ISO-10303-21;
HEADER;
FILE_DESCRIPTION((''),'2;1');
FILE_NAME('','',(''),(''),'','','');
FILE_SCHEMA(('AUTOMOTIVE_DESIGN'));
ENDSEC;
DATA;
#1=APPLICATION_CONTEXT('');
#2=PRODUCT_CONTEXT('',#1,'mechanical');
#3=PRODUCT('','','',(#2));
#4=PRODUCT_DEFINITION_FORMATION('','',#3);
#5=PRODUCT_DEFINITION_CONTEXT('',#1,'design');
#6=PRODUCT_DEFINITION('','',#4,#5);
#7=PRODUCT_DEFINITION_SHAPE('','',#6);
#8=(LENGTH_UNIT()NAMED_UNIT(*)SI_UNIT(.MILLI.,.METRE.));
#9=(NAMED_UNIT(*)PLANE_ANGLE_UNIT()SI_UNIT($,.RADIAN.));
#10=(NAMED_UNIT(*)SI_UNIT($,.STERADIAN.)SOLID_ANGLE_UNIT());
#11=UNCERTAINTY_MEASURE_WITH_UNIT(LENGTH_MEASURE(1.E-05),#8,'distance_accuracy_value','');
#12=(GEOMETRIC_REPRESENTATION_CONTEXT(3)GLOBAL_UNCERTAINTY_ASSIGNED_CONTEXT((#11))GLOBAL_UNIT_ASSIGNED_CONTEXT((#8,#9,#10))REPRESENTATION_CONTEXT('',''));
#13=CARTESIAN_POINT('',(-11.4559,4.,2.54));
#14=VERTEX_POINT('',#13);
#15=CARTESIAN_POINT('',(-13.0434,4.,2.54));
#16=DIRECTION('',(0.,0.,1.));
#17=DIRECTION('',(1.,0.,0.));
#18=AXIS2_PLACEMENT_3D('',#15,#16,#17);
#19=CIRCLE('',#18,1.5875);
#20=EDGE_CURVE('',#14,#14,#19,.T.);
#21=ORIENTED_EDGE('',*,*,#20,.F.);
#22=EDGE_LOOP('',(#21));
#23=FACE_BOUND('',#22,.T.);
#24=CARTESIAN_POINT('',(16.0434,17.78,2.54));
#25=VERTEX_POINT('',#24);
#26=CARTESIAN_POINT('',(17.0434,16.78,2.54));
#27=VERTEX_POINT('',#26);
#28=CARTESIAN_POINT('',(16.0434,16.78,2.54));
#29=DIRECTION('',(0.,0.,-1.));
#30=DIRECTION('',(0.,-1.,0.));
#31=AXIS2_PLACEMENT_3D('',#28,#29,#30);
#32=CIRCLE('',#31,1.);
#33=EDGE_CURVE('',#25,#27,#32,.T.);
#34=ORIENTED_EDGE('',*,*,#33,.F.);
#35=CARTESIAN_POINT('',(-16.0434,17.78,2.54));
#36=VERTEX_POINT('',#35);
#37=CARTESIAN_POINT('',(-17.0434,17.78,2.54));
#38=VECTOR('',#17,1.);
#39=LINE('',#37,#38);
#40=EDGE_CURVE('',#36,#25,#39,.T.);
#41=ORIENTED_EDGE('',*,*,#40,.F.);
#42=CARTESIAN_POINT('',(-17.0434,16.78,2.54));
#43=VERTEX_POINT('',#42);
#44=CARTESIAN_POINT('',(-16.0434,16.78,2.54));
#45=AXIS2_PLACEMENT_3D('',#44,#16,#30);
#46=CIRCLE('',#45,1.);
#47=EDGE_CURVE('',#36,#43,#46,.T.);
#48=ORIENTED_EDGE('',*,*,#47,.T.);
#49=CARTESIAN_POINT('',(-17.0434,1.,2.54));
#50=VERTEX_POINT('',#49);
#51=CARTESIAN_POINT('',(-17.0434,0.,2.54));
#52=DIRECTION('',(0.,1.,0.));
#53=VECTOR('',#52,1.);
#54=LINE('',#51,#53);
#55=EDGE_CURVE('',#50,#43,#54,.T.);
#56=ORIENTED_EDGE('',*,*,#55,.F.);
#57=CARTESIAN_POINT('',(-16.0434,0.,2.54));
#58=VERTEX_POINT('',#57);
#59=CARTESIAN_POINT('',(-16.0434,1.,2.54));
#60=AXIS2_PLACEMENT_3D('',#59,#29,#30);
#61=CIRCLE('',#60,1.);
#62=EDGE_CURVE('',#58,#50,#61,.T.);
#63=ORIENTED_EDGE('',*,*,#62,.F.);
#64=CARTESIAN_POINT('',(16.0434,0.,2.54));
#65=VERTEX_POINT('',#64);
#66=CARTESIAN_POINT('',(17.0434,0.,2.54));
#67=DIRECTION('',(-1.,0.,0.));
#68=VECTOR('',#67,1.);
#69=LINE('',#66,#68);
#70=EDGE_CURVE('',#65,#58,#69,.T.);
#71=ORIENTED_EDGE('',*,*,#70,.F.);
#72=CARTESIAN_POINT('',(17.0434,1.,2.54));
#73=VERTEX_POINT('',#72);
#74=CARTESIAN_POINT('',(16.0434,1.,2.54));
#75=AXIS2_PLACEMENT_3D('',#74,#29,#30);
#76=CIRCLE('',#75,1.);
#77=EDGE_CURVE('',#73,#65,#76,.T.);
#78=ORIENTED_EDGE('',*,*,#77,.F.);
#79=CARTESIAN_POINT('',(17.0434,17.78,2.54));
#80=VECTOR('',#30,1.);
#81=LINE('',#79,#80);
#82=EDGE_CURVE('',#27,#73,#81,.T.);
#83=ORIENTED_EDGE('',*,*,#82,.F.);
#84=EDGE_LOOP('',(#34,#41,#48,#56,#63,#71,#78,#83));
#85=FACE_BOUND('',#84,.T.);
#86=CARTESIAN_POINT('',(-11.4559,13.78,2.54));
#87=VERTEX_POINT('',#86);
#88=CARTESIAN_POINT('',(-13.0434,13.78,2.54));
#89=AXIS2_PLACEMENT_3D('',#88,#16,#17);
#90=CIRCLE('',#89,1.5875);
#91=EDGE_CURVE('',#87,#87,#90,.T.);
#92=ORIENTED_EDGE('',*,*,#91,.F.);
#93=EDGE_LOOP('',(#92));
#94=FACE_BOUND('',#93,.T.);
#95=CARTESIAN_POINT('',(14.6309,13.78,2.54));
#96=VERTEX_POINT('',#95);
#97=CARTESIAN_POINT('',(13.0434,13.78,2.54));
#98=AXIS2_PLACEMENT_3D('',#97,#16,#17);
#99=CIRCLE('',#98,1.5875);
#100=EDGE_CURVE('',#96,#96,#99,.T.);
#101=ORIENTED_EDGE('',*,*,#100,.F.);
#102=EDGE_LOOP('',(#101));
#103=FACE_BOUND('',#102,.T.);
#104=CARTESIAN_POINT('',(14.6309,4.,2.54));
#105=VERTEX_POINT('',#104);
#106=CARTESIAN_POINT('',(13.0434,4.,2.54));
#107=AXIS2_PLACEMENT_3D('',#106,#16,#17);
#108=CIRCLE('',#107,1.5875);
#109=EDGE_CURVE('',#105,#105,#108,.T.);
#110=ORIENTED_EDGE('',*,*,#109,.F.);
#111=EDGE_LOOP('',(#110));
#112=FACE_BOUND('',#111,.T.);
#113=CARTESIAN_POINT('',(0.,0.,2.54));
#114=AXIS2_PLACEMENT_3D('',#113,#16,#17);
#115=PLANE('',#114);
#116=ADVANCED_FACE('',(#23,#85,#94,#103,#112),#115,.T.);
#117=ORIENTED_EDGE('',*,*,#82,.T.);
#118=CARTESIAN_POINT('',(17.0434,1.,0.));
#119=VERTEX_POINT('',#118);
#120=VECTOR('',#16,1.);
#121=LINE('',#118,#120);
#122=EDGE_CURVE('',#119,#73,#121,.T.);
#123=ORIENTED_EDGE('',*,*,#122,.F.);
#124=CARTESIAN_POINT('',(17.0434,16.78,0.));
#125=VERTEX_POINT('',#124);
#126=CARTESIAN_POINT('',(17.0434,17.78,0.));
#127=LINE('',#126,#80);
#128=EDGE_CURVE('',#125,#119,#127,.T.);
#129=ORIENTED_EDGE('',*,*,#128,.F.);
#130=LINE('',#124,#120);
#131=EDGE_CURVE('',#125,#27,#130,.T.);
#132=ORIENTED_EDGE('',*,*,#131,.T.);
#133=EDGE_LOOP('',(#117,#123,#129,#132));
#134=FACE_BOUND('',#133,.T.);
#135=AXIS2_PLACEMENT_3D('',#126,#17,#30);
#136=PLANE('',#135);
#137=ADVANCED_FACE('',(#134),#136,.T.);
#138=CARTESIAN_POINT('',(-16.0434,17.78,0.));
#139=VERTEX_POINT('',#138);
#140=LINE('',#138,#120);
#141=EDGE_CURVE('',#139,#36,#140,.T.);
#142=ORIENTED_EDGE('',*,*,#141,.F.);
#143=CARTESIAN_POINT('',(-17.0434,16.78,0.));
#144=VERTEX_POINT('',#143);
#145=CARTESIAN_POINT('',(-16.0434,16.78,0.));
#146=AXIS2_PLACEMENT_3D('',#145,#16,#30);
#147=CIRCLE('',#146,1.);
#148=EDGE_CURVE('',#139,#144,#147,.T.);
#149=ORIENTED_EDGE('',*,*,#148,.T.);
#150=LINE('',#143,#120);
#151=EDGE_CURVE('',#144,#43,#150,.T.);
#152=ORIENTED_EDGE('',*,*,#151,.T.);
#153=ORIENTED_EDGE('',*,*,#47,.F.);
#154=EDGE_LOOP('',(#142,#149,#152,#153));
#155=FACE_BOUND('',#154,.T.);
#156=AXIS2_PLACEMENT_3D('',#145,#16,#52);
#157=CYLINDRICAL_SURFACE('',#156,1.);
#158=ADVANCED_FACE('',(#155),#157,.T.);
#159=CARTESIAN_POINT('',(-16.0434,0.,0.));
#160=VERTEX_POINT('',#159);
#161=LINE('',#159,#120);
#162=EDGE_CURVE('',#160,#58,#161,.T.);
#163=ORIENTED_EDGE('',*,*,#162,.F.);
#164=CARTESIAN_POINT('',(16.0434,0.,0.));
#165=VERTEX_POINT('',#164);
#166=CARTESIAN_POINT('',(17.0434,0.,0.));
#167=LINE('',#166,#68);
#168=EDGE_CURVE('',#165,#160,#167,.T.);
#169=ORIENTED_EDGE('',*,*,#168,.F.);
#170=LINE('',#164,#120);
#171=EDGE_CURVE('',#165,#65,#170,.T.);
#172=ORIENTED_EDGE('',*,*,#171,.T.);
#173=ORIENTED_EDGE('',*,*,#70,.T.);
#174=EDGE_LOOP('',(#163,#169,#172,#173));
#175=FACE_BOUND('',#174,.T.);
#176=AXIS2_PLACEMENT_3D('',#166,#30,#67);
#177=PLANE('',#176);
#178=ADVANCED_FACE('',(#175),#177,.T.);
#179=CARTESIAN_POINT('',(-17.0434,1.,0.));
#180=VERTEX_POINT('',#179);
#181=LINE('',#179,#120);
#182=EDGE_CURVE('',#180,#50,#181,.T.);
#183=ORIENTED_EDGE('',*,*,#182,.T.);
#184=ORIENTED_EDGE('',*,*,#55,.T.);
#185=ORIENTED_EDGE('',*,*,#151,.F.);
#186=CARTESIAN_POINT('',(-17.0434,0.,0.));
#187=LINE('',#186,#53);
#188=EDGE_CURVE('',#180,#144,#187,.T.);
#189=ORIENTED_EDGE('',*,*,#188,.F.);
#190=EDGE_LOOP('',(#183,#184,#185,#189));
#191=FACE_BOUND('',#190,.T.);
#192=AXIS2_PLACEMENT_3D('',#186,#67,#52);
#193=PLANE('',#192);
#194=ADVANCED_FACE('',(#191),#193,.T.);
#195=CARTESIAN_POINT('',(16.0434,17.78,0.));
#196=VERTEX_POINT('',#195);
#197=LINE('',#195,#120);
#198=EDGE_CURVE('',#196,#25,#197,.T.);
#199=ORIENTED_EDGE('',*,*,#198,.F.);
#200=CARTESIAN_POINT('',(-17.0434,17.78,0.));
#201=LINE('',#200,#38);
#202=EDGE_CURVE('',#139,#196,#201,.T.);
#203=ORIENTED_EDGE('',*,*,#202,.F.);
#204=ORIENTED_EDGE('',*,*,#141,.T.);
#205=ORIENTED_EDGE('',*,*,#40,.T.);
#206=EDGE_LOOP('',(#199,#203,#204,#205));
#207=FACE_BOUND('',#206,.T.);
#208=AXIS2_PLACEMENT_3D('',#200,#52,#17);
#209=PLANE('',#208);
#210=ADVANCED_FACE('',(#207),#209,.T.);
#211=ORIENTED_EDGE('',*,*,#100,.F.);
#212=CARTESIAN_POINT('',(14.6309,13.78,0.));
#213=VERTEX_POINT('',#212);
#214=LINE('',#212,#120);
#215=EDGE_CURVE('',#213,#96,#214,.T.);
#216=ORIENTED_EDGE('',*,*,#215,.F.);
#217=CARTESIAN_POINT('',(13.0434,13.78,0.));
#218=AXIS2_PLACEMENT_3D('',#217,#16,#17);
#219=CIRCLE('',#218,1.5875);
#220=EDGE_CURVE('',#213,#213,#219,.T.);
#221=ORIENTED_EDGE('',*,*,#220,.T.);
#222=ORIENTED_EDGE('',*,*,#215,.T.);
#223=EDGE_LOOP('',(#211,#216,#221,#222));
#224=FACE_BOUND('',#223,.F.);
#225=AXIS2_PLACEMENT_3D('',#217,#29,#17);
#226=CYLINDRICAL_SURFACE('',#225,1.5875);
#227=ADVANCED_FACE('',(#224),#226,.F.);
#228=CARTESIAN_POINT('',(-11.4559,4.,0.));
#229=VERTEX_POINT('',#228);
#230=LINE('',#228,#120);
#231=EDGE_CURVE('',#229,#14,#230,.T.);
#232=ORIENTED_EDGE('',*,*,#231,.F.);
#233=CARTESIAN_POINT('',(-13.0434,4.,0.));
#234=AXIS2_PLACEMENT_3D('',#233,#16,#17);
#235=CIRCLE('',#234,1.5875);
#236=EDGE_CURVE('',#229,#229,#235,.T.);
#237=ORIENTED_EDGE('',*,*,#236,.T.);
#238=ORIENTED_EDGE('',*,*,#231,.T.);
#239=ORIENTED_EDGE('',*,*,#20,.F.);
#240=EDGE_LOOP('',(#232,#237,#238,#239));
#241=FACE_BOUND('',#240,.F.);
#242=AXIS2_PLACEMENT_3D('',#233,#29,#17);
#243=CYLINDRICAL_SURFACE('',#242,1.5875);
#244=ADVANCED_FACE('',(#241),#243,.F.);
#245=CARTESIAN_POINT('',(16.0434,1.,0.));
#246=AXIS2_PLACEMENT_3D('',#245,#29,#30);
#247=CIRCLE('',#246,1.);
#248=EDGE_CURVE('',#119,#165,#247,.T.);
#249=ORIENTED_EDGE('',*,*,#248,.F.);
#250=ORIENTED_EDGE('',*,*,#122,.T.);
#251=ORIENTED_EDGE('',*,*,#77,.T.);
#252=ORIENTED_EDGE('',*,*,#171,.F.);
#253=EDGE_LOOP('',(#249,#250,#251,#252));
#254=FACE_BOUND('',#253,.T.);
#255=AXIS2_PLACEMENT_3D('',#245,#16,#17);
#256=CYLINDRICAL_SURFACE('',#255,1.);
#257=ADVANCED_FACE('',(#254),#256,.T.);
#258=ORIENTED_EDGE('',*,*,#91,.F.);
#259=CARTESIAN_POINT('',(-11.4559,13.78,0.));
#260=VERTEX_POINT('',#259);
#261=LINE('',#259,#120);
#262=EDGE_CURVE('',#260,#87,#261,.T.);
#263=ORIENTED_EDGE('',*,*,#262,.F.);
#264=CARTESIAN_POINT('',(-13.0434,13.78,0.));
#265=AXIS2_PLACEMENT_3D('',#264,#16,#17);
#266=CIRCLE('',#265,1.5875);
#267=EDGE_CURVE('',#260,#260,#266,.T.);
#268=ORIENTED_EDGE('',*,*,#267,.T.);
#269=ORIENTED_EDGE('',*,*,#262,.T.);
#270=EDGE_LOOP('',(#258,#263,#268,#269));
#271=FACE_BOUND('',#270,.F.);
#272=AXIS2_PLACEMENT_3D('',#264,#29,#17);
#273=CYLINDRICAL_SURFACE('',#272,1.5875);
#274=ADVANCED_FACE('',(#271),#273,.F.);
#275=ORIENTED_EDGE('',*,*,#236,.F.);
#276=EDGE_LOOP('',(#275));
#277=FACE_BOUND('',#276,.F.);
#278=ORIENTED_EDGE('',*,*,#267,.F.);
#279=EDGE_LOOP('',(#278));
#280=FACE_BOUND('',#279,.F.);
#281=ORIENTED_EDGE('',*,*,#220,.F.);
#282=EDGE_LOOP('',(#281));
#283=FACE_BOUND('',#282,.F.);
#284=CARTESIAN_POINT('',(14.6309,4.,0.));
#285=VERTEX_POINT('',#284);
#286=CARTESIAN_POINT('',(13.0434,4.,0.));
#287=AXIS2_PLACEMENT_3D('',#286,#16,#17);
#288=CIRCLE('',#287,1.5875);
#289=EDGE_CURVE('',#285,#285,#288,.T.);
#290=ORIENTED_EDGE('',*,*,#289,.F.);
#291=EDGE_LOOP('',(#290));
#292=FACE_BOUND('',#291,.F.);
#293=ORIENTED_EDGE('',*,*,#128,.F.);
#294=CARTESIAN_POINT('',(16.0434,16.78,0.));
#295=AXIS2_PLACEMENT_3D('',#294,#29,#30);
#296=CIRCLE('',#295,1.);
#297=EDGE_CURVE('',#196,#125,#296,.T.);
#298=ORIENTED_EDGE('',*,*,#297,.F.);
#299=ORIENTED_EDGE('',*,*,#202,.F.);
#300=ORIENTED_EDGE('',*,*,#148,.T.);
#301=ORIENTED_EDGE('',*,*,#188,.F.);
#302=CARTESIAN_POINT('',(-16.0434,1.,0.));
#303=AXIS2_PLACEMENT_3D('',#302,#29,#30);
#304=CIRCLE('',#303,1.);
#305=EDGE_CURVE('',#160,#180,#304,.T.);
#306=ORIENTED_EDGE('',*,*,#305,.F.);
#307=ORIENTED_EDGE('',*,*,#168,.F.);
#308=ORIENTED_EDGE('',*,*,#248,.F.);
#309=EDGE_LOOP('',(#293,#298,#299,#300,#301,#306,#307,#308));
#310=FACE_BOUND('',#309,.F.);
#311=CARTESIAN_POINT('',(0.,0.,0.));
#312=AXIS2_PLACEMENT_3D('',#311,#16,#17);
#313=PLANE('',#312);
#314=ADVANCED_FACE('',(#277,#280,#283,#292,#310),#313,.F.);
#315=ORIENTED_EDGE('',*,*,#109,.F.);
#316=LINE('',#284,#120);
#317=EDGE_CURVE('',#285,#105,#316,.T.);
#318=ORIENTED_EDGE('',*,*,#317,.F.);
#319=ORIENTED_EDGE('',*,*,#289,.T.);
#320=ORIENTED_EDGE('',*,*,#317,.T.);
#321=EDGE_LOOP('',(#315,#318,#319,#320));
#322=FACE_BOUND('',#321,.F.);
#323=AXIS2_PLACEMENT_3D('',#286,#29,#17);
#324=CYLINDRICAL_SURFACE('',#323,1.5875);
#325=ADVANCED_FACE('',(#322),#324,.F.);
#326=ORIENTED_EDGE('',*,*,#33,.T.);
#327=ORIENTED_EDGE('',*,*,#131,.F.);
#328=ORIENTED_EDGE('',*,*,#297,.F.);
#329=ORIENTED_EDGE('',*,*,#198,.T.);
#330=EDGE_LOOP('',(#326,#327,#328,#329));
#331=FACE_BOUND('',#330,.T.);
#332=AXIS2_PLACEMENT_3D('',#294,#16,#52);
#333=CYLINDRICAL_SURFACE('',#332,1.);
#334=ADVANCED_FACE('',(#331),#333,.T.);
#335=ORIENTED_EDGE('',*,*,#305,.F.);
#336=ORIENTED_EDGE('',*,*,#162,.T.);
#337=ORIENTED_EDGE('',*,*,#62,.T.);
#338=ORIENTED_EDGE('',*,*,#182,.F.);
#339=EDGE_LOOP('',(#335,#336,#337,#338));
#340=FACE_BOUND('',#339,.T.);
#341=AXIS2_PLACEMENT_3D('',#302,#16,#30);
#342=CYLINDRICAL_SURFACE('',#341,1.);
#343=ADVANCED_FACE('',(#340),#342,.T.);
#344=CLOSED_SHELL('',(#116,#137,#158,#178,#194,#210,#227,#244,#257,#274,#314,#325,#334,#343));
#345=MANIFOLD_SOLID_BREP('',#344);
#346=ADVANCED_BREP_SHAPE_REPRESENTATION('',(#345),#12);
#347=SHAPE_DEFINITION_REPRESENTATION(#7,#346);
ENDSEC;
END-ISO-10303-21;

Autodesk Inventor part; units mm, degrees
ref_plane "YZ Plane" through (0, 0, 0) normal (1, 0, 0) x (0, 1, 0)
ref_plane "XZ Plane" through (0, 0, 0) normal (0, 1, 0) x (-1, 0, 0)
ref_plane "XY Plane" through (0, 0, 0) normal (0, 0, 1) x (1, 0, 0)
sketch "Base" plane through (0, 0, 0) normal (0, 0, 1) x (1, 0, 0)
  line L0 (-17.0434, 17.78) -> (17.0434, 17.78)
  line L1 (17.0434, 17.78) -> (17.0434, 0)
  line L2 (17.0434, 0) -> (-17.0434, 0)
  line L3 (-17.0434, 0) -> (-17.0434, 17.78)
  circle A0 centre (13.0434, 13.78) radius 4 construction
  circle A1 centre (-13.0434, 13.78) radius 4 construction
  circle A2 centre (-13.0434, 4) radius 4 construction
  circle A3 centre (13.0434, 4) radius 4 construction
  circle A4 centre (-13.0434, 13.78) radius 1.5875
  circle A5 centre (-13.0434, 4) radius 1.5875
  circle A6 centre (13.0434, 13.78) radius 1.5875
  circle A7 centre (13.0434, 4) radius 1.5875
  point P0 (0, 0)
  point P1 (0, 28.2865)
  point P2 (0, 46.7013)
  point P3 (0, 0)
  dimension "d0" = 17.78
  dimension "d1" = 8
  dimension "d2" = 34.0868
  dimension "d3" = 3.175
extrude "Plate1" add sketch "Base" along normal blind 2.54
fillet "BaseROundFeature" radius 1 4 edges at (-17.0434, 17.78, 1.27) (17.0434, 17.78, 1.27) (-17.0434, 0, 1.27) (17.0434, 0, 1.27)
equation "\"d4\" = Thickness"
equation "\"BendRadius\" = Thickness"
equation "\"BendReliefWidth\" = Thickness"
equation "\"BendReliefDepth\" = 0.5 * Thickness"
equation "\"CornerReliefSize\" = 4 * Thickness"
equation "\"MinimumRemnant\" = 2 * Thickness"
equation "\"TransitionRadius\" = BendRadius"
equation "\"JacobiRadiusSize\" = BendRadius"
equation "\"GapSize\" = Thickness"
equation "\"Thickness\" = 2.54"
properties part number "BatteryPlate"
